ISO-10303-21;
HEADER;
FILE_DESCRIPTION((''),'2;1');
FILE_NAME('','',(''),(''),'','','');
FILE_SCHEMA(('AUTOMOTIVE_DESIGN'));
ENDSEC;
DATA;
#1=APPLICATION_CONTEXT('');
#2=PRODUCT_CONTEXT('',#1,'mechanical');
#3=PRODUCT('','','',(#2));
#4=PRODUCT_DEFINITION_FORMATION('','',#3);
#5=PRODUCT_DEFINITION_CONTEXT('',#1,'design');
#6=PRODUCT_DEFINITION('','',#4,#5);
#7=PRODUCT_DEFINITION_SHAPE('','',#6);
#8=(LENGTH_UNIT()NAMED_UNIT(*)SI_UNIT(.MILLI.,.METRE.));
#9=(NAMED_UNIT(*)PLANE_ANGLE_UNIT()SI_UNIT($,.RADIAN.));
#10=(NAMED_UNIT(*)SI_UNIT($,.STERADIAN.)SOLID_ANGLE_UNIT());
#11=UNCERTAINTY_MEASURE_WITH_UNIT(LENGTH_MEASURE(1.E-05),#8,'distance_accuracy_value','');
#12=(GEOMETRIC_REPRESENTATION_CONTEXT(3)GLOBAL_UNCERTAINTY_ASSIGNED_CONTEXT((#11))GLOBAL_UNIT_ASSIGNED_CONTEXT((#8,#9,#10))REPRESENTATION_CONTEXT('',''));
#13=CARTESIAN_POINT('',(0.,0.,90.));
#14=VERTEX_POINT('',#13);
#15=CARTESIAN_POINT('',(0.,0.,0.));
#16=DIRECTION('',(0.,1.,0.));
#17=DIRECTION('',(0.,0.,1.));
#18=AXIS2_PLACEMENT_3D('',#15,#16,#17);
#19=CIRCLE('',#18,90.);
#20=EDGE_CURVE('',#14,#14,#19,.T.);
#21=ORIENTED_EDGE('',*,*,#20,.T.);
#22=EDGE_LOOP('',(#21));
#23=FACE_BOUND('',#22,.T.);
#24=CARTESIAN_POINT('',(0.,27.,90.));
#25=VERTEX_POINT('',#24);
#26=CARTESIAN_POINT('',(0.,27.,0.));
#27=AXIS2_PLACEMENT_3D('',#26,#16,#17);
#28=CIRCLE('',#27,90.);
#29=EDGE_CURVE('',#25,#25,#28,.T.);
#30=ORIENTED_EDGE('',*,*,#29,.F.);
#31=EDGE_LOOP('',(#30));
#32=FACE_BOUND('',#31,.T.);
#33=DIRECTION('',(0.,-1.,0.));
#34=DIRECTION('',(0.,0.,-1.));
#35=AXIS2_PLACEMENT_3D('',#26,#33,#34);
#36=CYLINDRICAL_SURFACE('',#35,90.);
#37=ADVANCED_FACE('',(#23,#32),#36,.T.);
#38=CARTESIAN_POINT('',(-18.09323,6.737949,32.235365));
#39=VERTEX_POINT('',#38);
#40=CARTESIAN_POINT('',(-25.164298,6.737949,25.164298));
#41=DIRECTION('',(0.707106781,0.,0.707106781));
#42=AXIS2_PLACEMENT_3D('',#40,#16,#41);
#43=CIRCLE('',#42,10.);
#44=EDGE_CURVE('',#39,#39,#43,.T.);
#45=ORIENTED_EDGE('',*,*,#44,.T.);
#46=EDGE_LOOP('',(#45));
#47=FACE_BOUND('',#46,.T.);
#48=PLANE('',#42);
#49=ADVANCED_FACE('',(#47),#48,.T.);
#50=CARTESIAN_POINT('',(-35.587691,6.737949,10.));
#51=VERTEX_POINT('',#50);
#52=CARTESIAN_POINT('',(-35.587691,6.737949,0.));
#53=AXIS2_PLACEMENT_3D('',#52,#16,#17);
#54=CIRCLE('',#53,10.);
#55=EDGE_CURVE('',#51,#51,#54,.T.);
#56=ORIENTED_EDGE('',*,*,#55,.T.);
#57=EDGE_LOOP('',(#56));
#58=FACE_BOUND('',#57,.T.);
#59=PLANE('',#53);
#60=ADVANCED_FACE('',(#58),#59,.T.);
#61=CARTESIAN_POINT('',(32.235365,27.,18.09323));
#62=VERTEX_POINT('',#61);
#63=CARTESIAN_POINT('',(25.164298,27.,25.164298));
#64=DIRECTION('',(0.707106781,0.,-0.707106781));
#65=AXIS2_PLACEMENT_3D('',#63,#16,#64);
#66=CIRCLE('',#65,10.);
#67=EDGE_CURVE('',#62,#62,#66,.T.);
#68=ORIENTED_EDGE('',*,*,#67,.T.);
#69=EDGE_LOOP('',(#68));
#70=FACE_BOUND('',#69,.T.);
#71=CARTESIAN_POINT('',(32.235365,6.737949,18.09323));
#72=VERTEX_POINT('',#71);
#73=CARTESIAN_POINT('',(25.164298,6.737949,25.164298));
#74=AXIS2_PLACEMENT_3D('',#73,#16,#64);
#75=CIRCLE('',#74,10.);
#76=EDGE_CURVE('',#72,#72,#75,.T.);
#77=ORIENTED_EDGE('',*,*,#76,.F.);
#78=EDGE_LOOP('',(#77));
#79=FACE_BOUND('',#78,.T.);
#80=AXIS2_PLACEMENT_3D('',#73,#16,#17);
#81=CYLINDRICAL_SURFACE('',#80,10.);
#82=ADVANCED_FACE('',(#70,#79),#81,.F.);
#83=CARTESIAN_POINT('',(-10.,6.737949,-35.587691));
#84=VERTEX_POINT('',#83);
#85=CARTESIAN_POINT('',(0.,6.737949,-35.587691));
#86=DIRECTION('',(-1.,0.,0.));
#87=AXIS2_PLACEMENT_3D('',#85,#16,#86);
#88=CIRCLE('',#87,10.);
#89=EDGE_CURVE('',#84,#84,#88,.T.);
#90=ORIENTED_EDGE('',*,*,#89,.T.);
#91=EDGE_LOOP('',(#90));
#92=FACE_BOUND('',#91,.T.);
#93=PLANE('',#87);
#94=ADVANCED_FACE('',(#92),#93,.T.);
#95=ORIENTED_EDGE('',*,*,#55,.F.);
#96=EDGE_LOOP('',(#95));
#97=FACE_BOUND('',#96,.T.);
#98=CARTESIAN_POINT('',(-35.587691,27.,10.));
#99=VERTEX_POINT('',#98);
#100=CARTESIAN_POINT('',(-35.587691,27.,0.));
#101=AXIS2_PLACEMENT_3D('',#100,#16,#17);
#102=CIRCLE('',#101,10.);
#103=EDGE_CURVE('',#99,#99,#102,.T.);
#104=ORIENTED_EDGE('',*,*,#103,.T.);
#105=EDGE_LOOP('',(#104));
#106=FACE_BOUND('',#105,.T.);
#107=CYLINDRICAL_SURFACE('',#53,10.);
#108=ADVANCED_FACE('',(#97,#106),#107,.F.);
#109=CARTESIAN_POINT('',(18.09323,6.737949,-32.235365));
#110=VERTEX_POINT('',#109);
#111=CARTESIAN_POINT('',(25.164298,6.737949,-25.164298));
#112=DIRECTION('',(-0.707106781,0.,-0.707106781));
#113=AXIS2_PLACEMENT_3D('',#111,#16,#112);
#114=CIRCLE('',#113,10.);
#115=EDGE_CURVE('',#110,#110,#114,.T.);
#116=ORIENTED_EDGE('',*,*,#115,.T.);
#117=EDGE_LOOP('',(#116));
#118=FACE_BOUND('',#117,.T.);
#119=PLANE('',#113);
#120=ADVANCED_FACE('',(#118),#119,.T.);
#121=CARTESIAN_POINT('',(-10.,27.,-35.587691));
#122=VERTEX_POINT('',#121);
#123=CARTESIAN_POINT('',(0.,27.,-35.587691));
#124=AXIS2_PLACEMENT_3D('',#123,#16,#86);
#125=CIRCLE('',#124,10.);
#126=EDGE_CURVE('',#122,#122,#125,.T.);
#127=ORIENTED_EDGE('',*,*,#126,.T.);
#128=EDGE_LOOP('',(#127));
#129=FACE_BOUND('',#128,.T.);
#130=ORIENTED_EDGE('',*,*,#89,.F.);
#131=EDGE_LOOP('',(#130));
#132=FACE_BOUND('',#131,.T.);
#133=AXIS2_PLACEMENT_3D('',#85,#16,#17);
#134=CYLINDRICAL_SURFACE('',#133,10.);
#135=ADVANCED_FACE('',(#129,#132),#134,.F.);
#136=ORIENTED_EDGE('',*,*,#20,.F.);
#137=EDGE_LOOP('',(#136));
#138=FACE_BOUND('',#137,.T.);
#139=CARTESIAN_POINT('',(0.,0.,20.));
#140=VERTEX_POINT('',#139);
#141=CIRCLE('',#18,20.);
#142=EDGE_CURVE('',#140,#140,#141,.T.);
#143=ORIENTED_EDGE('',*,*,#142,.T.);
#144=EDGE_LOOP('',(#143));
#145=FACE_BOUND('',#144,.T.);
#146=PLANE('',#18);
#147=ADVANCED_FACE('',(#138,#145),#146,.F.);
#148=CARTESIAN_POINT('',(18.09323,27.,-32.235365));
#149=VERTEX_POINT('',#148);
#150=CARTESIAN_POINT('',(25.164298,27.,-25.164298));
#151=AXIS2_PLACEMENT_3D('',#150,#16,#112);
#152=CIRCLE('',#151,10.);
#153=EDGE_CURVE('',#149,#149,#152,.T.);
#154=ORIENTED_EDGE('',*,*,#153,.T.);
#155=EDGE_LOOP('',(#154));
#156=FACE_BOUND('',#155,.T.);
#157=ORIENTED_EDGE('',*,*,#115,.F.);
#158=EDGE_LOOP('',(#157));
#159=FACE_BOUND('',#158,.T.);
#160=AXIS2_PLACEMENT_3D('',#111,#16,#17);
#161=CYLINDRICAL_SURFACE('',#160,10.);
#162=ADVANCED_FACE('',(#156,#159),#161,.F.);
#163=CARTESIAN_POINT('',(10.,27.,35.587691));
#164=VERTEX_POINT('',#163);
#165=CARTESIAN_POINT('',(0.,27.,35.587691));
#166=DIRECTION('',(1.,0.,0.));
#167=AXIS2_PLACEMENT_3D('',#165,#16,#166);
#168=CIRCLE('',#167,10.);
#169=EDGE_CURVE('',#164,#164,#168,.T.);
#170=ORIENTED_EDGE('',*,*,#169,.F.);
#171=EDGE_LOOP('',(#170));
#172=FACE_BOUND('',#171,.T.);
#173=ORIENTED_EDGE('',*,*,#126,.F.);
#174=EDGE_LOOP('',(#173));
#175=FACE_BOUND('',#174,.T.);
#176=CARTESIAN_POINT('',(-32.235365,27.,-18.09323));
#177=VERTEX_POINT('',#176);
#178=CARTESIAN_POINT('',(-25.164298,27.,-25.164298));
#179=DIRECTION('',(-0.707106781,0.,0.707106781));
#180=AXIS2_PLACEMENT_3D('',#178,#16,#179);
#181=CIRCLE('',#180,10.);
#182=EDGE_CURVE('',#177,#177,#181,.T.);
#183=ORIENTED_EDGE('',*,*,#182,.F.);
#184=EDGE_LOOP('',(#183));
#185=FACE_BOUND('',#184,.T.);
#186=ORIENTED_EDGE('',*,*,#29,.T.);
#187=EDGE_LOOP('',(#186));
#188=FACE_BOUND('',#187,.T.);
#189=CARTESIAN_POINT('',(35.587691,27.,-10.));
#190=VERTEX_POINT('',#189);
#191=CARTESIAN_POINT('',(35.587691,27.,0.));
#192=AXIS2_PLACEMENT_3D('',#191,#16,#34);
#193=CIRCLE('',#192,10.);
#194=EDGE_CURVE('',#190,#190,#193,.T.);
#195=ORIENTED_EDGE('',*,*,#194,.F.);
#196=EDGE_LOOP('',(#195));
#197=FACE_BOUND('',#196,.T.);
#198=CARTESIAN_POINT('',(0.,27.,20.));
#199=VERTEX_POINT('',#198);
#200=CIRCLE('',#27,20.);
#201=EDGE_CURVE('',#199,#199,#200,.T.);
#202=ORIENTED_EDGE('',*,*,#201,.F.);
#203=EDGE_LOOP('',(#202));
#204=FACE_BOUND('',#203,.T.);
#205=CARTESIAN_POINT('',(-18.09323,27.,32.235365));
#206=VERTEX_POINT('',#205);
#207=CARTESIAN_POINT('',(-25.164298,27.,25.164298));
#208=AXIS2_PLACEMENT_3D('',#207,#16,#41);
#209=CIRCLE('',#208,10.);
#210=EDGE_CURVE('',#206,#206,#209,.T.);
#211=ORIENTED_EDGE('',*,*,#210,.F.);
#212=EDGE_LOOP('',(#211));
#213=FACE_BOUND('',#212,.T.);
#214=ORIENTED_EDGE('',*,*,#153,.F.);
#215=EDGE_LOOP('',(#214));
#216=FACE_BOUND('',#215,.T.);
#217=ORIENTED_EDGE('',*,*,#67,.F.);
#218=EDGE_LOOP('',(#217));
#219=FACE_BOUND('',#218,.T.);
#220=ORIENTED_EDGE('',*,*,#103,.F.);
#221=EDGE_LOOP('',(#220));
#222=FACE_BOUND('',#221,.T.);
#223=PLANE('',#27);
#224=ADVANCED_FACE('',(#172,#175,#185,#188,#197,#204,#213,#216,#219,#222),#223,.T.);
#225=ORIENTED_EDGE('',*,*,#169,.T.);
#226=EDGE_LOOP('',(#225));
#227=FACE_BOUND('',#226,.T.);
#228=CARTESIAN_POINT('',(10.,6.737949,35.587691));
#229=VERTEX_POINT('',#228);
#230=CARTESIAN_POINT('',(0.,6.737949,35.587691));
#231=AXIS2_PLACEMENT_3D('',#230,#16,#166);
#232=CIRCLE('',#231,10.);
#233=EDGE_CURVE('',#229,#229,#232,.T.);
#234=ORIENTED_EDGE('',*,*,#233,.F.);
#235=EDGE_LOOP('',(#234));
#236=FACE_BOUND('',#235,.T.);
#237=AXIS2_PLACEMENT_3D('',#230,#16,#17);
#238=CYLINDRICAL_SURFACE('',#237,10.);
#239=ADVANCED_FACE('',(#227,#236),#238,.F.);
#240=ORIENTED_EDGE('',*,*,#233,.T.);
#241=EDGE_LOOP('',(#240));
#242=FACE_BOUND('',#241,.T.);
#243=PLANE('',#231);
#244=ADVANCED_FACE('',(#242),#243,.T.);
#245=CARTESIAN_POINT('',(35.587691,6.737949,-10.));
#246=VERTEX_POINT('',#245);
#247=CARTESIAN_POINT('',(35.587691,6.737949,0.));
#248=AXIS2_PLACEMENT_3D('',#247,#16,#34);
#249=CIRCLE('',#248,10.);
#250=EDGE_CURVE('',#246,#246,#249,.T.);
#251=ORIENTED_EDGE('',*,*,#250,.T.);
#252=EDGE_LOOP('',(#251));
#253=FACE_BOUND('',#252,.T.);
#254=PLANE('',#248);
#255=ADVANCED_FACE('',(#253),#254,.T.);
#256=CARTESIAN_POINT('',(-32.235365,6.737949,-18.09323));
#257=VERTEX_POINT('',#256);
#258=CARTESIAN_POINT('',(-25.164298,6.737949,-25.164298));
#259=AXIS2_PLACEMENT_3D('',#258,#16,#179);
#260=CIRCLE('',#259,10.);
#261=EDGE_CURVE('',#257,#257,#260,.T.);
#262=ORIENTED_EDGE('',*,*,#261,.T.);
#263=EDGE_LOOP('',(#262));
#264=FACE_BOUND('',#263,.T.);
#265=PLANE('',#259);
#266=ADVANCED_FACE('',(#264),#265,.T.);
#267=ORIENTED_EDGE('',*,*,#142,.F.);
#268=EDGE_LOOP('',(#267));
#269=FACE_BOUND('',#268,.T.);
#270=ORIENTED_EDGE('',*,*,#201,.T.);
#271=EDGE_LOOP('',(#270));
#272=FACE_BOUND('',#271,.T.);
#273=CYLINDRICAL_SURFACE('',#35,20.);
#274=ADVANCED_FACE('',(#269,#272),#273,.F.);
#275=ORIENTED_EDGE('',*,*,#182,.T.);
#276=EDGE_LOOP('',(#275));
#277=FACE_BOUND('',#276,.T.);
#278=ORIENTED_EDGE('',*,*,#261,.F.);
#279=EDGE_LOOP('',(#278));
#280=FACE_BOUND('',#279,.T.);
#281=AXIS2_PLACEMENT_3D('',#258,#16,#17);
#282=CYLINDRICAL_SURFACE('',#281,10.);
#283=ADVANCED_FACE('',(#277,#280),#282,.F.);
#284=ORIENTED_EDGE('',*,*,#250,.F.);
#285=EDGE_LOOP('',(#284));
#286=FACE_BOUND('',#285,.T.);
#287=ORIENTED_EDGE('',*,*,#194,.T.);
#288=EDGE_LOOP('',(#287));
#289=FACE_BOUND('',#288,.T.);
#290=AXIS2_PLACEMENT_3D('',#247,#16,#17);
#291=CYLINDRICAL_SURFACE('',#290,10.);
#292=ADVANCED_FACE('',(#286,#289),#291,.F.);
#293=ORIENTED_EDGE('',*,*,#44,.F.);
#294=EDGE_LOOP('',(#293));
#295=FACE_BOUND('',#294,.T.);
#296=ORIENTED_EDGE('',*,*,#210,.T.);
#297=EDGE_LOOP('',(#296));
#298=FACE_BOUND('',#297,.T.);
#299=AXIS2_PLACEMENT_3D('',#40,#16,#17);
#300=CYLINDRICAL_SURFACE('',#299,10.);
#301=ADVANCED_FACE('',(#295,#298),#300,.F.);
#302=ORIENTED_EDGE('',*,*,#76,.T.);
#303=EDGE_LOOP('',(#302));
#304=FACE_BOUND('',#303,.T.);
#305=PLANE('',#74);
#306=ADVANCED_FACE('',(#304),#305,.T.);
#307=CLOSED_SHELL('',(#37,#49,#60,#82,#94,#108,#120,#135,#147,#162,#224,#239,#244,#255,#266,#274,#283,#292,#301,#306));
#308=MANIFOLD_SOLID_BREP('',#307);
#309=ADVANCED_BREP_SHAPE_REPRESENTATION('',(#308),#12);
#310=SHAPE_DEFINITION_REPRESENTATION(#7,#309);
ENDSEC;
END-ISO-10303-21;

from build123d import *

# Parameters (mm, degrees)
SKETCH1_R           = 90
BOSS_EXTRUDE1_DEPTH = 27
SKETCH2_R           = 20
CUT_EXTRUDE1_DEPTH  = 131.111490653
SKETCH3_R           = 10
CUT_EXTRUDE2_DEPTH  = 20.262050617
CIRPATTERN1_COUNT   = 8


with BuildPart() as part:
    # Sketch1 → Boss-Extrude1 (new body)
    with BuildSketch(Plane(origin=(0, 0, 0), x_dir=(1, 0, 0), z_dir=(0, 1, 0))):
        Circle(SKETCH1_R)
    extrude(amount=BOSS_EXTRUDE1_DEPTH)

    # Sketch2 → Cut-Extrude1 (cut, through all)
    with BuildSketch(Plane(origin=(0, 0, 0), x_dir=(1, 0, 0), z_dir=(0, 1, 0))):
        Circle(SKETCH2_R)
    extrude(amount=CUT_EXTRUDE1_DEPTH, mode=Mode.SUBTRACT)

    # Sketch3 → Cut-Extrude2 (cut)
    with BuildSketch(Plane(origin=(0, 27, 0), x_dir=(1, 0, 0), z_dir=(0, 1, 0))):
        with Locations((-35.587690931, 0)):
            Circle(SKETCH3_R)
    cut_extrude2 = extrude(amount=-CUT_EXTRUDE2_DEPTH, mode=Mode.SUBTRACT)

    # CirPattern1: Cut-Extrude2 ×8 about axis
    cirpattern1_axis = Axis((0, 0, 0), (0, 1, 0))
    for i in range(1, CIRPATTERN1_COUNT):
        add(cut_extrude2.rotate(cirpattern1_axis, i * 360 / CIRPATTERN1_COUNT), mode=Mode.SUBTRACT)


solid = part.part
